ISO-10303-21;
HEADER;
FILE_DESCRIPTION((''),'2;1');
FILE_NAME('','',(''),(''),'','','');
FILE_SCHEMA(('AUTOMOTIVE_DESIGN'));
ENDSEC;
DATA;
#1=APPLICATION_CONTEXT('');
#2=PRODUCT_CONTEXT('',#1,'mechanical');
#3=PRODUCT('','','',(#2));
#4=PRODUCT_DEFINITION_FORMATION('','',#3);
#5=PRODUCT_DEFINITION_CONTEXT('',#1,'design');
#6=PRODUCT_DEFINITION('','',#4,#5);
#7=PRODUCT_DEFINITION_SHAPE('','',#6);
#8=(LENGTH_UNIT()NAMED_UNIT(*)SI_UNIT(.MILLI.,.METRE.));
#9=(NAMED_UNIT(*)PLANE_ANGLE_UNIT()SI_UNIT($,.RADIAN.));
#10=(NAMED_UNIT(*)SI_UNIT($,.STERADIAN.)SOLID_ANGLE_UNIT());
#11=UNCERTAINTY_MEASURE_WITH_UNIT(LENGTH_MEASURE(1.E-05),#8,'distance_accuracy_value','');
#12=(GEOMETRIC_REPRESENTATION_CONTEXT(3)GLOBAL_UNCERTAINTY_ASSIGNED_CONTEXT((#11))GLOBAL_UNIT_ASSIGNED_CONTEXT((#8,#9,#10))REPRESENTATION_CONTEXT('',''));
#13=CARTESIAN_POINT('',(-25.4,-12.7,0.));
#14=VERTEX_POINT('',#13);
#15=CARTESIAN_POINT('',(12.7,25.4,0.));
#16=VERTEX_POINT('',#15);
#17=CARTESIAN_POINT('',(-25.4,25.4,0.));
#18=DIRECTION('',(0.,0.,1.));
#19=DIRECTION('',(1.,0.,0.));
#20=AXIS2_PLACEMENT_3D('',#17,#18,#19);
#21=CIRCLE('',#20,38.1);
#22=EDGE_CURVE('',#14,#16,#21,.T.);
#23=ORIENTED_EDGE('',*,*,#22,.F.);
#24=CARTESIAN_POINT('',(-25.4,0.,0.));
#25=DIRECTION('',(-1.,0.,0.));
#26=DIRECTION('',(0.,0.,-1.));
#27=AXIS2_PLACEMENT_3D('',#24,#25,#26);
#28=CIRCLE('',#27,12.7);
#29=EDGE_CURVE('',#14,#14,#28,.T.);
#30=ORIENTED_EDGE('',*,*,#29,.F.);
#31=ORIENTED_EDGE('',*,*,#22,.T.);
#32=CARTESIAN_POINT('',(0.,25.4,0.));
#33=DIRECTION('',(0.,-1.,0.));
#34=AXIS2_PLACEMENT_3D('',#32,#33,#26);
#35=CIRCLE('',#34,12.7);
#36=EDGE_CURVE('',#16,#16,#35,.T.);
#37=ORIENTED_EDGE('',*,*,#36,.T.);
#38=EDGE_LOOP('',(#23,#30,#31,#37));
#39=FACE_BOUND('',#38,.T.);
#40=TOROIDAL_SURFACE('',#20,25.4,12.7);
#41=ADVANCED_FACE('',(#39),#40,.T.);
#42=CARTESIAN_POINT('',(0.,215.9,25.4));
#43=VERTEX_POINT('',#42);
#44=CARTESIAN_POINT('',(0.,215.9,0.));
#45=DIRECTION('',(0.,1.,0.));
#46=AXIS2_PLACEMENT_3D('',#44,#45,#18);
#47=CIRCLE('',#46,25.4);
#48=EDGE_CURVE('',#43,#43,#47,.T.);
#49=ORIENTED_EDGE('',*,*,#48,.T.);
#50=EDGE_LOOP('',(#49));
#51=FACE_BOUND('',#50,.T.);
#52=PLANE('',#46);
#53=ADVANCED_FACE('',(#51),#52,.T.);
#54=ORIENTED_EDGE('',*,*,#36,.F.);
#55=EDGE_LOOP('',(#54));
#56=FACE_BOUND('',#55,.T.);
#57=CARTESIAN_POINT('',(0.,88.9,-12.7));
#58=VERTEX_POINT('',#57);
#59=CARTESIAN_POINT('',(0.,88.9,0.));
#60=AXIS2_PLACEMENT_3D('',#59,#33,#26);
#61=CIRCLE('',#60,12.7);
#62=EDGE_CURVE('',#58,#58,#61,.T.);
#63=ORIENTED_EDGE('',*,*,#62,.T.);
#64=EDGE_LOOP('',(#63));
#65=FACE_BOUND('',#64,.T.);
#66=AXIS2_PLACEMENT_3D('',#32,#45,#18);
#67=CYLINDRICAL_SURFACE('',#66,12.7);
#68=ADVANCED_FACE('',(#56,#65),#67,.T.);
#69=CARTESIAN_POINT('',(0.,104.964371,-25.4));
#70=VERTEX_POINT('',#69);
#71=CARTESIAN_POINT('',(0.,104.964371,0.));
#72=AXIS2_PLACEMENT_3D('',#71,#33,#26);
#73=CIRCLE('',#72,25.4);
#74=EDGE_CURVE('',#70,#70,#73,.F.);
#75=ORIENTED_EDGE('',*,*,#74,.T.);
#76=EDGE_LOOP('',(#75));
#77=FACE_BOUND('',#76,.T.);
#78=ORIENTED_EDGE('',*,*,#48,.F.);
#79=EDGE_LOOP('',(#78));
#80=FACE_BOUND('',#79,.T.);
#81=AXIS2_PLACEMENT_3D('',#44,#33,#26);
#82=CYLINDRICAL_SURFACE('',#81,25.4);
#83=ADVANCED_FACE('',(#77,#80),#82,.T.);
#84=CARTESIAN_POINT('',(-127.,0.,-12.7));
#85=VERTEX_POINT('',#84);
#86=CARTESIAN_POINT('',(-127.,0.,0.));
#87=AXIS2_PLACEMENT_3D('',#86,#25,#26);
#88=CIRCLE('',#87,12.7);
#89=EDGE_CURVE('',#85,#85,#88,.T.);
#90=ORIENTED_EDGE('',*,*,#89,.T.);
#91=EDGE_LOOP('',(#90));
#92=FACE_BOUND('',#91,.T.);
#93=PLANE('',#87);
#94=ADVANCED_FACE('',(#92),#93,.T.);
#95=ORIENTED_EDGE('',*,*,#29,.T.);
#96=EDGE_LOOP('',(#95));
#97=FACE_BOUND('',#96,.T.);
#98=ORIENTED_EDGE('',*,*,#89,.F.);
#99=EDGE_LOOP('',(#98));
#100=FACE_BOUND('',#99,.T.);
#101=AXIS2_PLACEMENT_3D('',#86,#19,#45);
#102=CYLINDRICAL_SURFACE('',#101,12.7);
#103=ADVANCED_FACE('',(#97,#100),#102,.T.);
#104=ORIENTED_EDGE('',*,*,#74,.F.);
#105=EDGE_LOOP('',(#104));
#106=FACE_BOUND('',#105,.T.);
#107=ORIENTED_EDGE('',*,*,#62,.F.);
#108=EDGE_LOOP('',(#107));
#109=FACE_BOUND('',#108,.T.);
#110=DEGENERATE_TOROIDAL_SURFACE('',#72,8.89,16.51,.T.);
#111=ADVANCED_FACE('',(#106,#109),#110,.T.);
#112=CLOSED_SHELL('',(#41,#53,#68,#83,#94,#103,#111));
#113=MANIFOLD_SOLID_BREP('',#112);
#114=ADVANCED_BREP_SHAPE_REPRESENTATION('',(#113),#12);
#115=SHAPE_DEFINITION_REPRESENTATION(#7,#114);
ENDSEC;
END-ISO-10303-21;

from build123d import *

# Parameters (mm, degrees)
SWEEP1_PROFILE_R    = 12.7
SKETCH2_R           = 25.4
BOSS_EXTRUDE1_DEPTH = 127
FILLET1_R           = 16.51


with BuildPart() as part:
    # Sweep1: sweep along a path in Sketch1
    with BuildLine(Plane.XY) as sweep1_path:
        Line((-127, 0), (-25.4, 0))
        ThreePointArc((-25.4, 0), (-7.439487758, 7.439487758), (0, 25.4))
        Line((0, 25.4), (0, 88.9))
    # Sweep1 profile (on start of the path) → Sweep1 (sweep)
    with BuildSketch(Plane.YZ.offset(-127)):
        Circle(SWEEP1_PROFILE_R)
    sweep(path=sweep1_path.line)

    # Sketch2 → Boss-Extrude1 (add)
    with BuildSketch(Plane(origin=(0, 88.9, 0), x_dir=(1, 0, 0), z_dir=(0, 1, 0))):
        with Locations(Location((0, 0, 0), (0, 0, 270))):
            Circle(SKETCH2_R)
    extrude(amount=BOSS_EXTRUDE1_DEPTH)

    # Fillet1
    # the kernel refuses this fillet: 16.51 mm, written as the material it takes off along each edge
    with BuildSketch(Plane(origin=(0, 88.9, 0), x_dir=(0, 0, 1), z_dir=(-1, 0, 0))) as fillet1_piece_1:
        with BuildLine():
            CenterArc((8.89, 16.064370514), FILLET1_R, 283.342363797, 76.657636203)
            Line((12.7, 0), (12.7762, -0.32128741))
            ThreePointArc((12.7762, -0.32128741), (19.05, -0.3302), (25.4, -0.3302))
            Line((25.4, -0.3302), (25.7302, 0))
            Line((25.7302, 0), (25.7302, 16.064370514))
            Line((25.7302, 16.064370514), (25.4, 16.064370514))
        make_face()
    revolve(axis=Axis((0, 88.9, 0), (0, 1, 0)), mode=Mode.SUBTRACT)


solid = part.part
